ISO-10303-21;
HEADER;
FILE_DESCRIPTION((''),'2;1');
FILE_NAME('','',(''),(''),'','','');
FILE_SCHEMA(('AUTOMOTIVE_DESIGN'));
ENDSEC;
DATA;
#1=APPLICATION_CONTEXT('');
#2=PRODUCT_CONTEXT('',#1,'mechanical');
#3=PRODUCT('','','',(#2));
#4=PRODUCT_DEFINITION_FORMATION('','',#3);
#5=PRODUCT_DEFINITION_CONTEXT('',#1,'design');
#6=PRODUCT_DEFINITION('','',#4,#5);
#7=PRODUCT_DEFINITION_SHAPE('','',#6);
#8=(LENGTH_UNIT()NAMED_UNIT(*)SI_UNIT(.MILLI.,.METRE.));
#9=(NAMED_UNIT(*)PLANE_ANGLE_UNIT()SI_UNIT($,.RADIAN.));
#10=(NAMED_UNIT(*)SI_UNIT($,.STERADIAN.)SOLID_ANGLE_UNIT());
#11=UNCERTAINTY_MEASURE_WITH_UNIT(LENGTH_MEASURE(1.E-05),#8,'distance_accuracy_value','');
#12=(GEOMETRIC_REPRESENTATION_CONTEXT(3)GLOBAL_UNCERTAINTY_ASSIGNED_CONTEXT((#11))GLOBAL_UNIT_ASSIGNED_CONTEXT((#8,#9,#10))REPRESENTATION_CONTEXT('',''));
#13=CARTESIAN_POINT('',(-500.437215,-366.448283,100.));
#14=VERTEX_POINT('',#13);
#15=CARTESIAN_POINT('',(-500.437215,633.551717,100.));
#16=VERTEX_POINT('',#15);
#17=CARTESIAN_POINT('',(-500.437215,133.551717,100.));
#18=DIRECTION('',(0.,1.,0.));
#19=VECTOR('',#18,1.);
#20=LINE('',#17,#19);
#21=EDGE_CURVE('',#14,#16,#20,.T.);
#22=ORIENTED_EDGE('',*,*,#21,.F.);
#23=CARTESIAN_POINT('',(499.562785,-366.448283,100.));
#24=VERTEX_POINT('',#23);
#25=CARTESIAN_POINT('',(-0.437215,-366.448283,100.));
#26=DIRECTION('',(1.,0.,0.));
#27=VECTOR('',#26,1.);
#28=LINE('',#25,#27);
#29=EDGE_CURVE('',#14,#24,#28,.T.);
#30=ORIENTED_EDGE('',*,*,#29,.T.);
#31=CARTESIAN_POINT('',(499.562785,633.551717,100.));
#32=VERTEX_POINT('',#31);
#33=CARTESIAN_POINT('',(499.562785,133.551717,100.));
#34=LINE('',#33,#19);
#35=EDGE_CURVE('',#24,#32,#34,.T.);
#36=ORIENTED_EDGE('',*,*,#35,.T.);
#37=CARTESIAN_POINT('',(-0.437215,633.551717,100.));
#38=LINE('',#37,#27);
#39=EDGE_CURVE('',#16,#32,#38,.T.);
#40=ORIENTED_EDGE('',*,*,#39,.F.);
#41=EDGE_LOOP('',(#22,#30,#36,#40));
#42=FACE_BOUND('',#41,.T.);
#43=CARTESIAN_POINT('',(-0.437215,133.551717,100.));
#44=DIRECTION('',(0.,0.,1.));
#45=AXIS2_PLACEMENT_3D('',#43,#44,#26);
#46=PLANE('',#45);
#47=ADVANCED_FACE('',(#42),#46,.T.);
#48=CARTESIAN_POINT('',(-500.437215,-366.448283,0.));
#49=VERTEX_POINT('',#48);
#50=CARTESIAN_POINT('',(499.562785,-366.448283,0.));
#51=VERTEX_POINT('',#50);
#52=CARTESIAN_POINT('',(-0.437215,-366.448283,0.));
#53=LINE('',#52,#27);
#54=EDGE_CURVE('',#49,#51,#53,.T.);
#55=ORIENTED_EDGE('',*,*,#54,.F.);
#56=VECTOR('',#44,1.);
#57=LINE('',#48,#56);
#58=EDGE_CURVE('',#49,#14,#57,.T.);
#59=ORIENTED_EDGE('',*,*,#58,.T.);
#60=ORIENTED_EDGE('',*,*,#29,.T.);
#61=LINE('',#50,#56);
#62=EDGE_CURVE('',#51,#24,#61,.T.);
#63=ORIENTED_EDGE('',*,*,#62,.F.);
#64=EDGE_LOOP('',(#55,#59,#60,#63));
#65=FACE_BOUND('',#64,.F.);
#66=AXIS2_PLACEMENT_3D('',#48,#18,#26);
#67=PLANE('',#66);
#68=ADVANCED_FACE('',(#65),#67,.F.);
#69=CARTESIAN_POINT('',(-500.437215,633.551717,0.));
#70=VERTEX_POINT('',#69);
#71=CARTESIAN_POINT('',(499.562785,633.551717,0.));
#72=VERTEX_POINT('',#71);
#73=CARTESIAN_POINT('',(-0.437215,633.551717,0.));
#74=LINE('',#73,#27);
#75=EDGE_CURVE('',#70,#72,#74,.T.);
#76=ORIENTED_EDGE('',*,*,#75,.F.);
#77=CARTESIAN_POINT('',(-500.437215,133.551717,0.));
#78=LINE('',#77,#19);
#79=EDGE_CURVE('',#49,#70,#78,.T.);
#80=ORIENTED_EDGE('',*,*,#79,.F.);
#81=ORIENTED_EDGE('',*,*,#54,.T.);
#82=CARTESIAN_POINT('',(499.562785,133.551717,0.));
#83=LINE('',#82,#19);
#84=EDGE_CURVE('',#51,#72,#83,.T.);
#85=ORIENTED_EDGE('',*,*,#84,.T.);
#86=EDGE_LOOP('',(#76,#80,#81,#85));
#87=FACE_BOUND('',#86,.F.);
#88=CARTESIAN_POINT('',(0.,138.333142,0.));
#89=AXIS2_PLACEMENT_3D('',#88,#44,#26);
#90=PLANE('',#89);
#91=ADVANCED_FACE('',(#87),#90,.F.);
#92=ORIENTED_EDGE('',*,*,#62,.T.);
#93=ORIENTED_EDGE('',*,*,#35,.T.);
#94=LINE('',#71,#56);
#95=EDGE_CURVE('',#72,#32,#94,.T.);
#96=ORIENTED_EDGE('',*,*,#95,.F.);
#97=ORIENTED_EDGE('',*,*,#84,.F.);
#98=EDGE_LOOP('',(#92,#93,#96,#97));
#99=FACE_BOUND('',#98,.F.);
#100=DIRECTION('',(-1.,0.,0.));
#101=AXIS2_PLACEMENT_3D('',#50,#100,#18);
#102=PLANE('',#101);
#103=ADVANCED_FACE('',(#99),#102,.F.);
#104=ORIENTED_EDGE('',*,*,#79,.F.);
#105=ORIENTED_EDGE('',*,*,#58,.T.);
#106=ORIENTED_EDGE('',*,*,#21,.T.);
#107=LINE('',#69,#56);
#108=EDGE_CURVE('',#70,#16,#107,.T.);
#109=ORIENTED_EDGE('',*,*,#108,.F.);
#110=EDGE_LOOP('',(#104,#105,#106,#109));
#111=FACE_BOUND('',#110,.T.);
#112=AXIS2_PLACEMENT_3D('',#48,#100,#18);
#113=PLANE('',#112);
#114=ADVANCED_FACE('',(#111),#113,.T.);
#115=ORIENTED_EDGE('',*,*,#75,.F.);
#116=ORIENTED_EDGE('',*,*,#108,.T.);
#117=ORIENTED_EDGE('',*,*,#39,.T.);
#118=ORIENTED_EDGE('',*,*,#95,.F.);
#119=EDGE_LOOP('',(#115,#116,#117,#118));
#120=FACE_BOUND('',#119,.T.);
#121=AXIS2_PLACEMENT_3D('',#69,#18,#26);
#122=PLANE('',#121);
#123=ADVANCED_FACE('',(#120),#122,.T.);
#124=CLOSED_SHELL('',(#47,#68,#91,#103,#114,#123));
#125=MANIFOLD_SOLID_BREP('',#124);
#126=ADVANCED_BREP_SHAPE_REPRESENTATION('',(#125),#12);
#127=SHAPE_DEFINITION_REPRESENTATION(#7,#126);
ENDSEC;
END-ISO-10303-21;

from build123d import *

# Parameters (mm, degrees)
F0_W     = 1000
F0_H     = 1000
F1_DEPTH = 100
F4_DEPTH = 80
F5_DEPTH = 80


# Not quite as in the source:
# - the program builds the solid bodies; features that only make, move or delete a surface that nothing else refers to are left out


with BuildPart() as f1:
    # F0 (on Top) → F1 (new body)
    with BuildSketch(Plane.XY):
        with Locations((-0.4372149706, 133.5517169366)):
            Rectangle(F0_W, F0_H)
    extrude(amount=F1_DEPTH)

    # F2 (on Top) → F4 (cut)
    with BuildSketch(Plane.XY):
        Polygon((66.5457851066, 298.988878727), (-66.5457851066, 298.988878727), (-160.6557369232, 204.8789269104), (-160.6557369232, 71.7873566971), (-66.5457851066, -22.3225951195), (66.5457851066, -22.3225951195), (160.6557369232, 71.7873566971), (160.6557369232, 204.8789269104), align=None)
    extrude(amount=F4_DEPTH, mode=Mode.SUBTRACT)

    # F5 (add): a face of the model
    f5_faces = [f1.faces().sort_by_distance(p)[0] for p in [
        (0, 138.3331418037, 80),
    ]]
    extrude(f5_faces, amount=F5_DEPTH)


solid = f1.part
